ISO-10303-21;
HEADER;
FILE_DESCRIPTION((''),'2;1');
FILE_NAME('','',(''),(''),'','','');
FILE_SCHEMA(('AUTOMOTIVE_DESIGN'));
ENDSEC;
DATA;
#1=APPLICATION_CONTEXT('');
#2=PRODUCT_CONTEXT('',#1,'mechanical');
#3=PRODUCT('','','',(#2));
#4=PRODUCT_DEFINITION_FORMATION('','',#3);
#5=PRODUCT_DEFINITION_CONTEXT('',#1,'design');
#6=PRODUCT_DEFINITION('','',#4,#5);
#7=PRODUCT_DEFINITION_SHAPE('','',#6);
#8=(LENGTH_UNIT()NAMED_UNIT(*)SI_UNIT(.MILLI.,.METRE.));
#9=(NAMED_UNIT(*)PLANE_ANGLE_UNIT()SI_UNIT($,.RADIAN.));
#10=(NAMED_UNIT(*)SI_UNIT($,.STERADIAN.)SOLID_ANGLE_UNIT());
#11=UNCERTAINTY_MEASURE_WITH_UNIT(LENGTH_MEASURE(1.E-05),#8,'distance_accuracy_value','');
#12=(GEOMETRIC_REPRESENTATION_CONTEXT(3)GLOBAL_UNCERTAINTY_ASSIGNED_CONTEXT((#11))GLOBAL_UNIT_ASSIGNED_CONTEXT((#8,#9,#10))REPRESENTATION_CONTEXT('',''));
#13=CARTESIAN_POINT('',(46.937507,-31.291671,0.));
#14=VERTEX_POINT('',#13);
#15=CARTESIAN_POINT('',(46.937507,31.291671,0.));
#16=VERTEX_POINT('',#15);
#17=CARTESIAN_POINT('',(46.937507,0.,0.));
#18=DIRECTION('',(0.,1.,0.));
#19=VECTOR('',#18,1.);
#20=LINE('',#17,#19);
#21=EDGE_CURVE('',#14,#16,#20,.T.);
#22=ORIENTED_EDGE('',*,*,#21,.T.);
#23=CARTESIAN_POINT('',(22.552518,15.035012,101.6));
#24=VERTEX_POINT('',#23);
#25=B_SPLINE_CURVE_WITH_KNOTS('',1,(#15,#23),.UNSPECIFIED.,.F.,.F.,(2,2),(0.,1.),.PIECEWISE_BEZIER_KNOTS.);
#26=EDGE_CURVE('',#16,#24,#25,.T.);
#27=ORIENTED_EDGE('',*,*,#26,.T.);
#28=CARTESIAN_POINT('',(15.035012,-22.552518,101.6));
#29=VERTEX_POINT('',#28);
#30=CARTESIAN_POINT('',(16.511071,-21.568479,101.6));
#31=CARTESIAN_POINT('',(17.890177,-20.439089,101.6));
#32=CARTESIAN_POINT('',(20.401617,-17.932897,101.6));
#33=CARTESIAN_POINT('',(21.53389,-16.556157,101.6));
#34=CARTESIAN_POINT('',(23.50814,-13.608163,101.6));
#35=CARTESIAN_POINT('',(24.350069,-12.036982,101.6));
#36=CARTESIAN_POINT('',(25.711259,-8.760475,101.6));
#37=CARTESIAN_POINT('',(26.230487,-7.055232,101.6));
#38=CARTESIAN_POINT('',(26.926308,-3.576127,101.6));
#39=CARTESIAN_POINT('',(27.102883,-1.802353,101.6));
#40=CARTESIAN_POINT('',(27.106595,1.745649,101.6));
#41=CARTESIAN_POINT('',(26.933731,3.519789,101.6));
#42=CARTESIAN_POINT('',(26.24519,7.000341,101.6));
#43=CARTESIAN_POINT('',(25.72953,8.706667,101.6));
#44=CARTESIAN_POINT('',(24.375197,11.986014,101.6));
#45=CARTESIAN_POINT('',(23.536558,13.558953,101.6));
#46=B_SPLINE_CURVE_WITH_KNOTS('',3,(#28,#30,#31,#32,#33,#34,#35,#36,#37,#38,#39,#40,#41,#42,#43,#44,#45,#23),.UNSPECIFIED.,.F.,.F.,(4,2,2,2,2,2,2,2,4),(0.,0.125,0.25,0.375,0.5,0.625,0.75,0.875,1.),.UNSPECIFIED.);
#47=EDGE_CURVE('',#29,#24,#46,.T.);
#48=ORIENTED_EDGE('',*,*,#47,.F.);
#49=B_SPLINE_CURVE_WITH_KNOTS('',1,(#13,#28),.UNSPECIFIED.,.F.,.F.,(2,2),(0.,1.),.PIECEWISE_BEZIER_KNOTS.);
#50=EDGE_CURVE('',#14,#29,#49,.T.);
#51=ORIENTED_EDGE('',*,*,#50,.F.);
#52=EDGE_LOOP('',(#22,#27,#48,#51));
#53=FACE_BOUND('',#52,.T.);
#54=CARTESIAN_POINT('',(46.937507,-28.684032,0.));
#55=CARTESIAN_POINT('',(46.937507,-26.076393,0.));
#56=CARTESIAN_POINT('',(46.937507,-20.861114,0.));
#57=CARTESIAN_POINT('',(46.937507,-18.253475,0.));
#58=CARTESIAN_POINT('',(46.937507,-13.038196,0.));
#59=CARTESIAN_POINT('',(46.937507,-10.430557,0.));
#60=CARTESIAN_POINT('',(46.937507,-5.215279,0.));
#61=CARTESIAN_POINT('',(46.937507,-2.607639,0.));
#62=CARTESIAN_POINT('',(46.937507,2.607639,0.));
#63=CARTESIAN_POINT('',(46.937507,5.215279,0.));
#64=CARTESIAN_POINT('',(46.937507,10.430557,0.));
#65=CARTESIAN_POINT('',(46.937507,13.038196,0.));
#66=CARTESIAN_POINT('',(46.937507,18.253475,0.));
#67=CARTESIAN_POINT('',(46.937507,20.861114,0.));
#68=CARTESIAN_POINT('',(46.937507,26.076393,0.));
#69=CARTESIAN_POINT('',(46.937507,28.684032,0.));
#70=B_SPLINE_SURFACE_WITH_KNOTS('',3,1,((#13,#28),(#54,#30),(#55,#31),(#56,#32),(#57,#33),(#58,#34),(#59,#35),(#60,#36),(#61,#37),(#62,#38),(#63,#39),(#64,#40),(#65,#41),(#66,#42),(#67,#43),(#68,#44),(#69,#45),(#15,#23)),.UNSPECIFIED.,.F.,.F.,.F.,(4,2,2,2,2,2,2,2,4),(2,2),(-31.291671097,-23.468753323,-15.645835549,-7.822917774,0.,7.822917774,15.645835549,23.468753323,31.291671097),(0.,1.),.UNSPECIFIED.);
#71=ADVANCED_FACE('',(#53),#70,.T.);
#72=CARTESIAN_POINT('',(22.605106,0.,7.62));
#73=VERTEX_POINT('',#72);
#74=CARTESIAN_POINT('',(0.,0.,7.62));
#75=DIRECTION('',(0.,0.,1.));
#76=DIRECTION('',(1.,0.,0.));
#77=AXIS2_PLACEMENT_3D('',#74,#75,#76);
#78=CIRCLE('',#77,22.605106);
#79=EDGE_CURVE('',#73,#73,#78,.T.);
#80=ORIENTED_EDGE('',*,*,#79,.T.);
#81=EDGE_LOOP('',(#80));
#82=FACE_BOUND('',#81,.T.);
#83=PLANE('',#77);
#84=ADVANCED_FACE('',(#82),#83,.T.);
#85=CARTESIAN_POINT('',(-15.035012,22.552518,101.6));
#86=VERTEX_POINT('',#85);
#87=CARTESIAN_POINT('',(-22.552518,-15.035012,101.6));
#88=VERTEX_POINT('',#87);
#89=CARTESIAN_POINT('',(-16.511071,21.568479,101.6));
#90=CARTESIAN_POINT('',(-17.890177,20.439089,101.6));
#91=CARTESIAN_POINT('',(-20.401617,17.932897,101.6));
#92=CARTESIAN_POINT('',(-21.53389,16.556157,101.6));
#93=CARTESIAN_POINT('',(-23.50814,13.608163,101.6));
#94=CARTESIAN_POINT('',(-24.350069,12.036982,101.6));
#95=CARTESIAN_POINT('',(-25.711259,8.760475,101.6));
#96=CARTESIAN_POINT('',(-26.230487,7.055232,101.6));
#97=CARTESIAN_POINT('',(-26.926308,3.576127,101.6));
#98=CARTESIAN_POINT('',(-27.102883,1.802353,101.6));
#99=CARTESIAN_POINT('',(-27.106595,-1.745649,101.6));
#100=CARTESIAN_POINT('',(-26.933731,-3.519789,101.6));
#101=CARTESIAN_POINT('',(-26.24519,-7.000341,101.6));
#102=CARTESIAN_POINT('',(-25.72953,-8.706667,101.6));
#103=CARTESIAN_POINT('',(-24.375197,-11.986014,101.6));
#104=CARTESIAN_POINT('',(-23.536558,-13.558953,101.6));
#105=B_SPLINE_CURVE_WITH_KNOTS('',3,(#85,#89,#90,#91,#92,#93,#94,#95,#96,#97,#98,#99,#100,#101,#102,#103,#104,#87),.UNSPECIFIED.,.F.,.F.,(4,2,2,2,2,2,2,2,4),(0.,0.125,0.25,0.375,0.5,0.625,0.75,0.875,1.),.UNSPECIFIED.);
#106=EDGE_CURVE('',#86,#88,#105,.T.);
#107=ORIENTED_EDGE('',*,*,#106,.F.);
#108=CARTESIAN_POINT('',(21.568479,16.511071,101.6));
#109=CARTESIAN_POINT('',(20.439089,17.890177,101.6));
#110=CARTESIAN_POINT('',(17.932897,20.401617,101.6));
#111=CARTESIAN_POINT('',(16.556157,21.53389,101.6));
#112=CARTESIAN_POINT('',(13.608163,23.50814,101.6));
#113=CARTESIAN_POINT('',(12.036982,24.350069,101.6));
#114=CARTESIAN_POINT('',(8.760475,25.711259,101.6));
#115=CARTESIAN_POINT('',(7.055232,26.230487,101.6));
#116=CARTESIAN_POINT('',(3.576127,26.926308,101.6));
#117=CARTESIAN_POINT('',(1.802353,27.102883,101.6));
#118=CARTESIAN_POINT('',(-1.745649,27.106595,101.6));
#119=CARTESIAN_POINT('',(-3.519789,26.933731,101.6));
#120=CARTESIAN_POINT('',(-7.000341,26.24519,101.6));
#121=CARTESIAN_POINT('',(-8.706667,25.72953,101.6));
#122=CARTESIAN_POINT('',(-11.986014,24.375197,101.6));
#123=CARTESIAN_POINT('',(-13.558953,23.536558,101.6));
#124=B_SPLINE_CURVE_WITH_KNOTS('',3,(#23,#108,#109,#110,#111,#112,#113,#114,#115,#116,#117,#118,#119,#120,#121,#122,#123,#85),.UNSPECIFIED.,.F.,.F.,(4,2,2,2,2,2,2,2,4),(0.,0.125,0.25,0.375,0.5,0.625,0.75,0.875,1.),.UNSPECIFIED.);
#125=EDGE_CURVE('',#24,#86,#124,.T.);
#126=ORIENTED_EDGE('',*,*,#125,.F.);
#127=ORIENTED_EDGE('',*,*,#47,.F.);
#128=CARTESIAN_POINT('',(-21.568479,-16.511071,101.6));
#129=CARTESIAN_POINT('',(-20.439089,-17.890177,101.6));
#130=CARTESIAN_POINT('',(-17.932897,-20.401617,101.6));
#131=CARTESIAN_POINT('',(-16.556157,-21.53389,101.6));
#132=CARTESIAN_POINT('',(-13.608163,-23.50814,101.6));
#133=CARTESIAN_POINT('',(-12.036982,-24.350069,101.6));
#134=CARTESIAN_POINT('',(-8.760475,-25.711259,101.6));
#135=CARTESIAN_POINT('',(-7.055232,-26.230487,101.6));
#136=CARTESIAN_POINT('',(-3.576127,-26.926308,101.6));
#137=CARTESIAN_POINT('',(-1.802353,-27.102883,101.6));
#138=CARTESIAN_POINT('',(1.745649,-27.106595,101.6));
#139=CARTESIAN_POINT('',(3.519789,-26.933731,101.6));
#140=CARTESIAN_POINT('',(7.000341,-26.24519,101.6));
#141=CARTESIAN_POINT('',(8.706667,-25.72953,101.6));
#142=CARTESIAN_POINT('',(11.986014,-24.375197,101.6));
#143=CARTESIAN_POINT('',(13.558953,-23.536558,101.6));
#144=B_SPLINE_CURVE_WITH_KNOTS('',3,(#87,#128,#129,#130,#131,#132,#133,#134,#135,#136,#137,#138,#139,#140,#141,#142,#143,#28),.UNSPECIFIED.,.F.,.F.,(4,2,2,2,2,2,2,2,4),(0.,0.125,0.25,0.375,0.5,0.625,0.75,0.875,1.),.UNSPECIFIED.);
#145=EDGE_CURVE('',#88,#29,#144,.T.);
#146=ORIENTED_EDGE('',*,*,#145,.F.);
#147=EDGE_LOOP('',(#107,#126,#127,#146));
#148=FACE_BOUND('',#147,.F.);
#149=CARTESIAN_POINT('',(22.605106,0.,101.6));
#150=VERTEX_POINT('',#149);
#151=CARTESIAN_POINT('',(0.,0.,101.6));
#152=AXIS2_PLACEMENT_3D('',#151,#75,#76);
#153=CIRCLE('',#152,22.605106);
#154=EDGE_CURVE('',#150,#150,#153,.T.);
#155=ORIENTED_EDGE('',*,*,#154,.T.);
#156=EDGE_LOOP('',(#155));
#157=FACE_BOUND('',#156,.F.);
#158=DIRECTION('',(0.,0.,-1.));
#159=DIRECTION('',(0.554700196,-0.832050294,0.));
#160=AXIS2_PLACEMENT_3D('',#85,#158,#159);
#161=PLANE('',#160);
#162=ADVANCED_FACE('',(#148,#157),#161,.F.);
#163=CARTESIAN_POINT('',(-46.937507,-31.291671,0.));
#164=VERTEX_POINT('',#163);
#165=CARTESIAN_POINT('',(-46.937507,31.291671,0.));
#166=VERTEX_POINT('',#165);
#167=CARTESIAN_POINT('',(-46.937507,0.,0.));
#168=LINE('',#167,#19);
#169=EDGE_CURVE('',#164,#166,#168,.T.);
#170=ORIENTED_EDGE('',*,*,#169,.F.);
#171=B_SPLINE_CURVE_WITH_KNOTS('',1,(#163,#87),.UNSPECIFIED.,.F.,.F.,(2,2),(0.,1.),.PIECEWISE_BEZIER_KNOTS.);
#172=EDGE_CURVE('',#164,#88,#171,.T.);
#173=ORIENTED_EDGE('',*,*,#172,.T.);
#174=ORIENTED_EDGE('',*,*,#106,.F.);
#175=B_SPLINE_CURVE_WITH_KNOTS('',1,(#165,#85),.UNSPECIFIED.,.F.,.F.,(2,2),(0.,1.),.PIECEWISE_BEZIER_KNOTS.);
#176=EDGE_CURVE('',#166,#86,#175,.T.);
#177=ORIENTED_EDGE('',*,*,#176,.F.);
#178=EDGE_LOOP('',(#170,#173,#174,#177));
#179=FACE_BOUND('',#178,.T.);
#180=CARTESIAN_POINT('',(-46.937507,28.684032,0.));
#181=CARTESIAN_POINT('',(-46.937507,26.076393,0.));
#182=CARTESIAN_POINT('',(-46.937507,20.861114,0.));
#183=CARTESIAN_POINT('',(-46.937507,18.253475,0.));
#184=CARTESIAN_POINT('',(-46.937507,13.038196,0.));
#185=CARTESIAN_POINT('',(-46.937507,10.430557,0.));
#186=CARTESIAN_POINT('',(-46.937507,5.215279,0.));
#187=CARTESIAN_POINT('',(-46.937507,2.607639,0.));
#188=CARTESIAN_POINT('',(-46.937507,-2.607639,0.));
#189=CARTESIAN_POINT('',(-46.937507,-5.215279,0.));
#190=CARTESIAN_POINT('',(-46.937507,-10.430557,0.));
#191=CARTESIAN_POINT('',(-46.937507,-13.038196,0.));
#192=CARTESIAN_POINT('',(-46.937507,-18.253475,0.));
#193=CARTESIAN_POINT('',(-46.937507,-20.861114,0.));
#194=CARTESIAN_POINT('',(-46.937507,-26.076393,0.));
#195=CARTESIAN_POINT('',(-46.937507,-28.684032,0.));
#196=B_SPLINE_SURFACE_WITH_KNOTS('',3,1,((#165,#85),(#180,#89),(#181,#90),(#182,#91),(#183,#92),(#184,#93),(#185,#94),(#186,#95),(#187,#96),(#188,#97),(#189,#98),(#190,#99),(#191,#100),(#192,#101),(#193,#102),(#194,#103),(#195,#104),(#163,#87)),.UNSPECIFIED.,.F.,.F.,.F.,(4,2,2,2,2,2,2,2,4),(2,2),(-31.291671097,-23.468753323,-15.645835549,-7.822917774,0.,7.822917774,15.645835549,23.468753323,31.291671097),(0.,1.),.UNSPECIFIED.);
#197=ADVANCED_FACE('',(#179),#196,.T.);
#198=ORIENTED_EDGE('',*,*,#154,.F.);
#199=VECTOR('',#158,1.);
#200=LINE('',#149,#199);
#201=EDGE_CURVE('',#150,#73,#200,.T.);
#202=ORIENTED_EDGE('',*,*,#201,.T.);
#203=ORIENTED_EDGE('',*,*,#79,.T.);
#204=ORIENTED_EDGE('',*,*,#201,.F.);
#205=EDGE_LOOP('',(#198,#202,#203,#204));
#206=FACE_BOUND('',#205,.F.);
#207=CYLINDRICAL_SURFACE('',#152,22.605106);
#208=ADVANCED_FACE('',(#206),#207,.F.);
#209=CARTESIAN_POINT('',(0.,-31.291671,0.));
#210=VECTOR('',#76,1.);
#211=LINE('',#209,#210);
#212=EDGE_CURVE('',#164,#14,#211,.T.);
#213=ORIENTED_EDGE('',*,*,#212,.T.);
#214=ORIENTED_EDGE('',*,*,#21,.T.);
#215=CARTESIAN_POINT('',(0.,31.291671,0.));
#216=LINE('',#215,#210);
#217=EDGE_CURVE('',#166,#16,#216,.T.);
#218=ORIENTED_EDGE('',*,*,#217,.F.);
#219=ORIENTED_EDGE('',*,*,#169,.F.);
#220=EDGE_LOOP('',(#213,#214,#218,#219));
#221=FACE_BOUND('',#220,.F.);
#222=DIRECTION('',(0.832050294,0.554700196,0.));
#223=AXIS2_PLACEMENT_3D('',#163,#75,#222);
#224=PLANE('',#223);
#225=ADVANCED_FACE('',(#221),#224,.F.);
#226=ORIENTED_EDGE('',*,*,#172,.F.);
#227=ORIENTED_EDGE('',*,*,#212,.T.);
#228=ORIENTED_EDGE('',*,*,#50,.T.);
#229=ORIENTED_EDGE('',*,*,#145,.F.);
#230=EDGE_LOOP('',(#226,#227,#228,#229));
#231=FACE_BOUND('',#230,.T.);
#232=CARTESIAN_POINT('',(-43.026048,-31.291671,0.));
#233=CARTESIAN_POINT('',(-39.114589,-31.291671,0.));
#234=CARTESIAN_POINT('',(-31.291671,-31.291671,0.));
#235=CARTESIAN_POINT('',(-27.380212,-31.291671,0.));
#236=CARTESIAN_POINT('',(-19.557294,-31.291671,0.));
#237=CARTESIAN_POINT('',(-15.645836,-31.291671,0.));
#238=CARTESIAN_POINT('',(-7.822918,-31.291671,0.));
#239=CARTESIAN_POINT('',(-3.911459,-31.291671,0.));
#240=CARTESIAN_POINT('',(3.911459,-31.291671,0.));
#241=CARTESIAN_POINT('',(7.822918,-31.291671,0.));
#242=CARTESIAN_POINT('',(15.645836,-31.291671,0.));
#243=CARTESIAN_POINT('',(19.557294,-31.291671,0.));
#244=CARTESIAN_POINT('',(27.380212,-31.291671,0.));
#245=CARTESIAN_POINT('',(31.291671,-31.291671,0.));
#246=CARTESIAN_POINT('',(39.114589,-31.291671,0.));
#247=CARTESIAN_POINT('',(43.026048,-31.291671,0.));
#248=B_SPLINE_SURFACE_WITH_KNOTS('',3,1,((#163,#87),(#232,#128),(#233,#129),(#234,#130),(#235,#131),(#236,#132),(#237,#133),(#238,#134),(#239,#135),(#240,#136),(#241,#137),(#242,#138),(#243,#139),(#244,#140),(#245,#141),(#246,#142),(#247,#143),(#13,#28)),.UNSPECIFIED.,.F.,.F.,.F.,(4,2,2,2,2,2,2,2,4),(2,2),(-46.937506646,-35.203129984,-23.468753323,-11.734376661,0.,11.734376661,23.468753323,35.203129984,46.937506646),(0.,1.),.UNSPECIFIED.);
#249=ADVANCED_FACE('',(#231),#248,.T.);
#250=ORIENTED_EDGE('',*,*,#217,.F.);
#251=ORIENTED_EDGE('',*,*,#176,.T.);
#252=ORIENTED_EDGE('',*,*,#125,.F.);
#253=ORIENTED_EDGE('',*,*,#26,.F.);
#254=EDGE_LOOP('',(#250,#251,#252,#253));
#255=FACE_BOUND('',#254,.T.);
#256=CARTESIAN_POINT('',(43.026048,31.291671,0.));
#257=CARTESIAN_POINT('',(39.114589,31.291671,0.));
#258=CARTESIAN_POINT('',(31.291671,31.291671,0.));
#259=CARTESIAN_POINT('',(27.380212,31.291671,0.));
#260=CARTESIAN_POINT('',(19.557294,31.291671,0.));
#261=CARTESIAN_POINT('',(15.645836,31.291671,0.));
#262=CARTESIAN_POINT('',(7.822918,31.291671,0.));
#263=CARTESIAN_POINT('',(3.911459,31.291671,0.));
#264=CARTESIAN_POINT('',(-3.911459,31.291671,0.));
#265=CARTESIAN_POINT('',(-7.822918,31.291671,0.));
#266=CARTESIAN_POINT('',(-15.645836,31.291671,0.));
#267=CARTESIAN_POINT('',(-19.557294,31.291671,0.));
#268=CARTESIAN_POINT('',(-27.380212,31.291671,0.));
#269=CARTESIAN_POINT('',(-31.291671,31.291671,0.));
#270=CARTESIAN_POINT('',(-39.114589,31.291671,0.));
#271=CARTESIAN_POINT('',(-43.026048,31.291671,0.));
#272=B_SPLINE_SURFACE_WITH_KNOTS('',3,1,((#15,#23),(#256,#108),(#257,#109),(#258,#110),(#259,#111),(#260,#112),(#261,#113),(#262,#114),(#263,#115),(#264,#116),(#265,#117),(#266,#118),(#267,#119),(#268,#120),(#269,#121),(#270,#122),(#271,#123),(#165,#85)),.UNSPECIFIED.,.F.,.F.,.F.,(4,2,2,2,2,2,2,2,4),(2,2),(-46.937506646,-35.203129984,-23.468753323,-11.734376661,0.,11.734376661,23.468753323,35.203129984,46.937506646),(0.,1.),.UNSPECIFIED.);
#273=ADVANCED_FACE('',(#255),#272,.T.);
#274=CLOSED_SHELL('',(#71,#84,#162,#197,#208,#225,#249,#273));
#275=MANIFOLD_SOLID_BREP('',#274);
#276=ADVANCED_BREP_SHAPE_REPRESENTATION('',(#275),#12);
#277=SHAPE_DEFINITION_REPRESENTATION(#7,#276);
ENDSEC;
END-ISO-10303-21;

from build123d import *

# Parameters (mm, degrees)
F5_W     = 93.8750132918
F5_H     = 62.5833421946
F7_R     = 22.6051057699
F8_DEPTH = 93.98


# Not quite as in the source:
# - the arcs of a loft's sections are written as splines that run evenly, so that the points pair up as in the source's solid
# - the program builds the solid bodies; features that only make, move or delete a surface that nothing else refers to are left out


with BuildPart() as f6:
    # F5 (on Top) → F6 section 0
    with BuildSketch(Plane.XY):
        Rectangle(F5_W, F5_H)
    # F4 (on offset) → F6 section 1
    with BuildSketch(Plane.XY.offset(101.6)):
        with BuildLine():
            add(Edge.make_bspline(
                [(22.5525184305, 15.035012287), (21.5684791775, 16.5110711666), (20.439088741, 17.8901765373), (17.9328967072, 20.4016171121), (16.5561570804, 21.5338902158), (13.6081630734, 23.5081403532), (12.0369815881, 24.3500685697), (8.7604753642, 25.7112589441), (7.0552316437, 26.2304874441), (3.5761274997, 26.9263082729), (1.8023531039, 27.1028833962), (-1.7456489391, 27.1065946751), (-3.519788855, 26.9337307389), (-7.0003410682, 26.2451898455), (-8.706667302, 25.7295299139), (-11.9860140158, 24.3751970887), (-13.5589534074, 23.5365576836), (-15.035012287, 22.5525184305)],
                knots=[0, 0, 0, 0, 0.125, 0.125, 0.25, 0.25, 0.375, 0.375, 0.5, 0.5, 0.625, 0.625, 0.75, 0.75, 0.875, 0.875, 1, 1, 1, 1], degree=3))
            add(Edge.make_bspline(
                [(-15.035012287, 22.5525184305), (-16.5110711666, 21.5684791775), (-17.8901765373, 20.439088741), (-20.4016171121, 17.9328967072), (-21.5338902158, 16.5561570804), (-23.5081403532, 13.6081630734), (-24.3500685697, 12.0369815881), (-25.7112589441, 8.7604753642), (-26.2304874441, 7.0552316437), (-26.9263082729, 3.5761274997), (-27.1028833962, 1.8023531039), (-27.1065946751, -1.7456489391), (-26.9337307389, -3.519788855), (-26.2451898455, -7.0003410682), (-25.7295299139, -8.706667302), (-24.3751970887, -11.9860140158), (-23.5365576836, -13.5589534074), (-22.5525184305, -15.035012287)],
                knots=[0, 0, 0, 0, 0.125, 0.125, 0.25, 0.25, 0.375, 0.375, 0.5, 0.5, 0.625, 0.625, 0.75, 0.75, 0.875, 0.875, 1, 1, 1, 1], degree=3))
            add(Edge.make_bspline(
                [(-22.5525184305, -15.035012287), (-21.5684791775, -16.5110711666), (-20.439088741, -17.8901765373), (-17.9328967072, -20.4016171121), (-16.5561570804, -21.5338902158), (-13.6081630734, -23.5081403532), (-12.0369815881, -24.3500685697), (-8.7604753642, -25.7112589441), (-7.0552316437, -26.2304874441), (-3.5761274997, -26.9263082729), (-1.8023531039, -27.1028833962), (1.7456489391, -27.1065946751), (3.519788855, -26.9337307389), (7.0003410682, -26.2451898455), (8.706667302, -25.7295299139), (11.9860140158, -24.3751970887), (13.5589534074, -23.5365576836), (15.035012287, -22.5525184305)],
                knots=[0, 0, 0, 0, 0.125, 0.125, 0.25, 0.25, 0.375, 0.375, 0.5, 0.5, 0.625, 0.625, 0.75, 0.75, 0.875, 0.875, 1, 1, 1, 1], degree=3))
            add(Edge.make_bspline(
                [(15.035012287, -22.5525184305), (16.5110711666, -21.5684791775), (17.8901765373, -20.439088741), (20.4016171121, -17.9328967072), (21.5338902158, -16.5561570804), (23.5081403532, -13.6081630734), (24.3500685697, -12.0369815881), (25.7112589441, -8.7604753642), (26.2304874441, -7.0552316437), (26.9263082729, -3.5761274997), (27.1028833962, -1.8023531039), (27.1065946751, 1.7456489391), (26.9337307389, 3.519788855), (26.2451898455, 7.0003410682), (25.7295299139, 8.706667302), (24.3751970887, 11.9860140158), (23.5365576836, 13.5589534074), (22.5525184305, 15.035012287)],
                knots=[0, 0, 0, 0, 0.125, 0.125, 0.25, 0.25, 0.375, 0.375, 0.5, 0.5, 0.625, 0.625, 0.75, 0.75, 0.875, 0.875, 1, 1, 1, 1], degree=3))
        make_face()
    loft(ruled=True)

    # F7 (on offset) → F8 (cut)
    with BuildSketch(Plane.XY.offset(101.6)):
        Circle(F7_R)
    extrude(amount=-F8_DEPTH, mode=Mode.SUBTRACT)


solid = f6.part
